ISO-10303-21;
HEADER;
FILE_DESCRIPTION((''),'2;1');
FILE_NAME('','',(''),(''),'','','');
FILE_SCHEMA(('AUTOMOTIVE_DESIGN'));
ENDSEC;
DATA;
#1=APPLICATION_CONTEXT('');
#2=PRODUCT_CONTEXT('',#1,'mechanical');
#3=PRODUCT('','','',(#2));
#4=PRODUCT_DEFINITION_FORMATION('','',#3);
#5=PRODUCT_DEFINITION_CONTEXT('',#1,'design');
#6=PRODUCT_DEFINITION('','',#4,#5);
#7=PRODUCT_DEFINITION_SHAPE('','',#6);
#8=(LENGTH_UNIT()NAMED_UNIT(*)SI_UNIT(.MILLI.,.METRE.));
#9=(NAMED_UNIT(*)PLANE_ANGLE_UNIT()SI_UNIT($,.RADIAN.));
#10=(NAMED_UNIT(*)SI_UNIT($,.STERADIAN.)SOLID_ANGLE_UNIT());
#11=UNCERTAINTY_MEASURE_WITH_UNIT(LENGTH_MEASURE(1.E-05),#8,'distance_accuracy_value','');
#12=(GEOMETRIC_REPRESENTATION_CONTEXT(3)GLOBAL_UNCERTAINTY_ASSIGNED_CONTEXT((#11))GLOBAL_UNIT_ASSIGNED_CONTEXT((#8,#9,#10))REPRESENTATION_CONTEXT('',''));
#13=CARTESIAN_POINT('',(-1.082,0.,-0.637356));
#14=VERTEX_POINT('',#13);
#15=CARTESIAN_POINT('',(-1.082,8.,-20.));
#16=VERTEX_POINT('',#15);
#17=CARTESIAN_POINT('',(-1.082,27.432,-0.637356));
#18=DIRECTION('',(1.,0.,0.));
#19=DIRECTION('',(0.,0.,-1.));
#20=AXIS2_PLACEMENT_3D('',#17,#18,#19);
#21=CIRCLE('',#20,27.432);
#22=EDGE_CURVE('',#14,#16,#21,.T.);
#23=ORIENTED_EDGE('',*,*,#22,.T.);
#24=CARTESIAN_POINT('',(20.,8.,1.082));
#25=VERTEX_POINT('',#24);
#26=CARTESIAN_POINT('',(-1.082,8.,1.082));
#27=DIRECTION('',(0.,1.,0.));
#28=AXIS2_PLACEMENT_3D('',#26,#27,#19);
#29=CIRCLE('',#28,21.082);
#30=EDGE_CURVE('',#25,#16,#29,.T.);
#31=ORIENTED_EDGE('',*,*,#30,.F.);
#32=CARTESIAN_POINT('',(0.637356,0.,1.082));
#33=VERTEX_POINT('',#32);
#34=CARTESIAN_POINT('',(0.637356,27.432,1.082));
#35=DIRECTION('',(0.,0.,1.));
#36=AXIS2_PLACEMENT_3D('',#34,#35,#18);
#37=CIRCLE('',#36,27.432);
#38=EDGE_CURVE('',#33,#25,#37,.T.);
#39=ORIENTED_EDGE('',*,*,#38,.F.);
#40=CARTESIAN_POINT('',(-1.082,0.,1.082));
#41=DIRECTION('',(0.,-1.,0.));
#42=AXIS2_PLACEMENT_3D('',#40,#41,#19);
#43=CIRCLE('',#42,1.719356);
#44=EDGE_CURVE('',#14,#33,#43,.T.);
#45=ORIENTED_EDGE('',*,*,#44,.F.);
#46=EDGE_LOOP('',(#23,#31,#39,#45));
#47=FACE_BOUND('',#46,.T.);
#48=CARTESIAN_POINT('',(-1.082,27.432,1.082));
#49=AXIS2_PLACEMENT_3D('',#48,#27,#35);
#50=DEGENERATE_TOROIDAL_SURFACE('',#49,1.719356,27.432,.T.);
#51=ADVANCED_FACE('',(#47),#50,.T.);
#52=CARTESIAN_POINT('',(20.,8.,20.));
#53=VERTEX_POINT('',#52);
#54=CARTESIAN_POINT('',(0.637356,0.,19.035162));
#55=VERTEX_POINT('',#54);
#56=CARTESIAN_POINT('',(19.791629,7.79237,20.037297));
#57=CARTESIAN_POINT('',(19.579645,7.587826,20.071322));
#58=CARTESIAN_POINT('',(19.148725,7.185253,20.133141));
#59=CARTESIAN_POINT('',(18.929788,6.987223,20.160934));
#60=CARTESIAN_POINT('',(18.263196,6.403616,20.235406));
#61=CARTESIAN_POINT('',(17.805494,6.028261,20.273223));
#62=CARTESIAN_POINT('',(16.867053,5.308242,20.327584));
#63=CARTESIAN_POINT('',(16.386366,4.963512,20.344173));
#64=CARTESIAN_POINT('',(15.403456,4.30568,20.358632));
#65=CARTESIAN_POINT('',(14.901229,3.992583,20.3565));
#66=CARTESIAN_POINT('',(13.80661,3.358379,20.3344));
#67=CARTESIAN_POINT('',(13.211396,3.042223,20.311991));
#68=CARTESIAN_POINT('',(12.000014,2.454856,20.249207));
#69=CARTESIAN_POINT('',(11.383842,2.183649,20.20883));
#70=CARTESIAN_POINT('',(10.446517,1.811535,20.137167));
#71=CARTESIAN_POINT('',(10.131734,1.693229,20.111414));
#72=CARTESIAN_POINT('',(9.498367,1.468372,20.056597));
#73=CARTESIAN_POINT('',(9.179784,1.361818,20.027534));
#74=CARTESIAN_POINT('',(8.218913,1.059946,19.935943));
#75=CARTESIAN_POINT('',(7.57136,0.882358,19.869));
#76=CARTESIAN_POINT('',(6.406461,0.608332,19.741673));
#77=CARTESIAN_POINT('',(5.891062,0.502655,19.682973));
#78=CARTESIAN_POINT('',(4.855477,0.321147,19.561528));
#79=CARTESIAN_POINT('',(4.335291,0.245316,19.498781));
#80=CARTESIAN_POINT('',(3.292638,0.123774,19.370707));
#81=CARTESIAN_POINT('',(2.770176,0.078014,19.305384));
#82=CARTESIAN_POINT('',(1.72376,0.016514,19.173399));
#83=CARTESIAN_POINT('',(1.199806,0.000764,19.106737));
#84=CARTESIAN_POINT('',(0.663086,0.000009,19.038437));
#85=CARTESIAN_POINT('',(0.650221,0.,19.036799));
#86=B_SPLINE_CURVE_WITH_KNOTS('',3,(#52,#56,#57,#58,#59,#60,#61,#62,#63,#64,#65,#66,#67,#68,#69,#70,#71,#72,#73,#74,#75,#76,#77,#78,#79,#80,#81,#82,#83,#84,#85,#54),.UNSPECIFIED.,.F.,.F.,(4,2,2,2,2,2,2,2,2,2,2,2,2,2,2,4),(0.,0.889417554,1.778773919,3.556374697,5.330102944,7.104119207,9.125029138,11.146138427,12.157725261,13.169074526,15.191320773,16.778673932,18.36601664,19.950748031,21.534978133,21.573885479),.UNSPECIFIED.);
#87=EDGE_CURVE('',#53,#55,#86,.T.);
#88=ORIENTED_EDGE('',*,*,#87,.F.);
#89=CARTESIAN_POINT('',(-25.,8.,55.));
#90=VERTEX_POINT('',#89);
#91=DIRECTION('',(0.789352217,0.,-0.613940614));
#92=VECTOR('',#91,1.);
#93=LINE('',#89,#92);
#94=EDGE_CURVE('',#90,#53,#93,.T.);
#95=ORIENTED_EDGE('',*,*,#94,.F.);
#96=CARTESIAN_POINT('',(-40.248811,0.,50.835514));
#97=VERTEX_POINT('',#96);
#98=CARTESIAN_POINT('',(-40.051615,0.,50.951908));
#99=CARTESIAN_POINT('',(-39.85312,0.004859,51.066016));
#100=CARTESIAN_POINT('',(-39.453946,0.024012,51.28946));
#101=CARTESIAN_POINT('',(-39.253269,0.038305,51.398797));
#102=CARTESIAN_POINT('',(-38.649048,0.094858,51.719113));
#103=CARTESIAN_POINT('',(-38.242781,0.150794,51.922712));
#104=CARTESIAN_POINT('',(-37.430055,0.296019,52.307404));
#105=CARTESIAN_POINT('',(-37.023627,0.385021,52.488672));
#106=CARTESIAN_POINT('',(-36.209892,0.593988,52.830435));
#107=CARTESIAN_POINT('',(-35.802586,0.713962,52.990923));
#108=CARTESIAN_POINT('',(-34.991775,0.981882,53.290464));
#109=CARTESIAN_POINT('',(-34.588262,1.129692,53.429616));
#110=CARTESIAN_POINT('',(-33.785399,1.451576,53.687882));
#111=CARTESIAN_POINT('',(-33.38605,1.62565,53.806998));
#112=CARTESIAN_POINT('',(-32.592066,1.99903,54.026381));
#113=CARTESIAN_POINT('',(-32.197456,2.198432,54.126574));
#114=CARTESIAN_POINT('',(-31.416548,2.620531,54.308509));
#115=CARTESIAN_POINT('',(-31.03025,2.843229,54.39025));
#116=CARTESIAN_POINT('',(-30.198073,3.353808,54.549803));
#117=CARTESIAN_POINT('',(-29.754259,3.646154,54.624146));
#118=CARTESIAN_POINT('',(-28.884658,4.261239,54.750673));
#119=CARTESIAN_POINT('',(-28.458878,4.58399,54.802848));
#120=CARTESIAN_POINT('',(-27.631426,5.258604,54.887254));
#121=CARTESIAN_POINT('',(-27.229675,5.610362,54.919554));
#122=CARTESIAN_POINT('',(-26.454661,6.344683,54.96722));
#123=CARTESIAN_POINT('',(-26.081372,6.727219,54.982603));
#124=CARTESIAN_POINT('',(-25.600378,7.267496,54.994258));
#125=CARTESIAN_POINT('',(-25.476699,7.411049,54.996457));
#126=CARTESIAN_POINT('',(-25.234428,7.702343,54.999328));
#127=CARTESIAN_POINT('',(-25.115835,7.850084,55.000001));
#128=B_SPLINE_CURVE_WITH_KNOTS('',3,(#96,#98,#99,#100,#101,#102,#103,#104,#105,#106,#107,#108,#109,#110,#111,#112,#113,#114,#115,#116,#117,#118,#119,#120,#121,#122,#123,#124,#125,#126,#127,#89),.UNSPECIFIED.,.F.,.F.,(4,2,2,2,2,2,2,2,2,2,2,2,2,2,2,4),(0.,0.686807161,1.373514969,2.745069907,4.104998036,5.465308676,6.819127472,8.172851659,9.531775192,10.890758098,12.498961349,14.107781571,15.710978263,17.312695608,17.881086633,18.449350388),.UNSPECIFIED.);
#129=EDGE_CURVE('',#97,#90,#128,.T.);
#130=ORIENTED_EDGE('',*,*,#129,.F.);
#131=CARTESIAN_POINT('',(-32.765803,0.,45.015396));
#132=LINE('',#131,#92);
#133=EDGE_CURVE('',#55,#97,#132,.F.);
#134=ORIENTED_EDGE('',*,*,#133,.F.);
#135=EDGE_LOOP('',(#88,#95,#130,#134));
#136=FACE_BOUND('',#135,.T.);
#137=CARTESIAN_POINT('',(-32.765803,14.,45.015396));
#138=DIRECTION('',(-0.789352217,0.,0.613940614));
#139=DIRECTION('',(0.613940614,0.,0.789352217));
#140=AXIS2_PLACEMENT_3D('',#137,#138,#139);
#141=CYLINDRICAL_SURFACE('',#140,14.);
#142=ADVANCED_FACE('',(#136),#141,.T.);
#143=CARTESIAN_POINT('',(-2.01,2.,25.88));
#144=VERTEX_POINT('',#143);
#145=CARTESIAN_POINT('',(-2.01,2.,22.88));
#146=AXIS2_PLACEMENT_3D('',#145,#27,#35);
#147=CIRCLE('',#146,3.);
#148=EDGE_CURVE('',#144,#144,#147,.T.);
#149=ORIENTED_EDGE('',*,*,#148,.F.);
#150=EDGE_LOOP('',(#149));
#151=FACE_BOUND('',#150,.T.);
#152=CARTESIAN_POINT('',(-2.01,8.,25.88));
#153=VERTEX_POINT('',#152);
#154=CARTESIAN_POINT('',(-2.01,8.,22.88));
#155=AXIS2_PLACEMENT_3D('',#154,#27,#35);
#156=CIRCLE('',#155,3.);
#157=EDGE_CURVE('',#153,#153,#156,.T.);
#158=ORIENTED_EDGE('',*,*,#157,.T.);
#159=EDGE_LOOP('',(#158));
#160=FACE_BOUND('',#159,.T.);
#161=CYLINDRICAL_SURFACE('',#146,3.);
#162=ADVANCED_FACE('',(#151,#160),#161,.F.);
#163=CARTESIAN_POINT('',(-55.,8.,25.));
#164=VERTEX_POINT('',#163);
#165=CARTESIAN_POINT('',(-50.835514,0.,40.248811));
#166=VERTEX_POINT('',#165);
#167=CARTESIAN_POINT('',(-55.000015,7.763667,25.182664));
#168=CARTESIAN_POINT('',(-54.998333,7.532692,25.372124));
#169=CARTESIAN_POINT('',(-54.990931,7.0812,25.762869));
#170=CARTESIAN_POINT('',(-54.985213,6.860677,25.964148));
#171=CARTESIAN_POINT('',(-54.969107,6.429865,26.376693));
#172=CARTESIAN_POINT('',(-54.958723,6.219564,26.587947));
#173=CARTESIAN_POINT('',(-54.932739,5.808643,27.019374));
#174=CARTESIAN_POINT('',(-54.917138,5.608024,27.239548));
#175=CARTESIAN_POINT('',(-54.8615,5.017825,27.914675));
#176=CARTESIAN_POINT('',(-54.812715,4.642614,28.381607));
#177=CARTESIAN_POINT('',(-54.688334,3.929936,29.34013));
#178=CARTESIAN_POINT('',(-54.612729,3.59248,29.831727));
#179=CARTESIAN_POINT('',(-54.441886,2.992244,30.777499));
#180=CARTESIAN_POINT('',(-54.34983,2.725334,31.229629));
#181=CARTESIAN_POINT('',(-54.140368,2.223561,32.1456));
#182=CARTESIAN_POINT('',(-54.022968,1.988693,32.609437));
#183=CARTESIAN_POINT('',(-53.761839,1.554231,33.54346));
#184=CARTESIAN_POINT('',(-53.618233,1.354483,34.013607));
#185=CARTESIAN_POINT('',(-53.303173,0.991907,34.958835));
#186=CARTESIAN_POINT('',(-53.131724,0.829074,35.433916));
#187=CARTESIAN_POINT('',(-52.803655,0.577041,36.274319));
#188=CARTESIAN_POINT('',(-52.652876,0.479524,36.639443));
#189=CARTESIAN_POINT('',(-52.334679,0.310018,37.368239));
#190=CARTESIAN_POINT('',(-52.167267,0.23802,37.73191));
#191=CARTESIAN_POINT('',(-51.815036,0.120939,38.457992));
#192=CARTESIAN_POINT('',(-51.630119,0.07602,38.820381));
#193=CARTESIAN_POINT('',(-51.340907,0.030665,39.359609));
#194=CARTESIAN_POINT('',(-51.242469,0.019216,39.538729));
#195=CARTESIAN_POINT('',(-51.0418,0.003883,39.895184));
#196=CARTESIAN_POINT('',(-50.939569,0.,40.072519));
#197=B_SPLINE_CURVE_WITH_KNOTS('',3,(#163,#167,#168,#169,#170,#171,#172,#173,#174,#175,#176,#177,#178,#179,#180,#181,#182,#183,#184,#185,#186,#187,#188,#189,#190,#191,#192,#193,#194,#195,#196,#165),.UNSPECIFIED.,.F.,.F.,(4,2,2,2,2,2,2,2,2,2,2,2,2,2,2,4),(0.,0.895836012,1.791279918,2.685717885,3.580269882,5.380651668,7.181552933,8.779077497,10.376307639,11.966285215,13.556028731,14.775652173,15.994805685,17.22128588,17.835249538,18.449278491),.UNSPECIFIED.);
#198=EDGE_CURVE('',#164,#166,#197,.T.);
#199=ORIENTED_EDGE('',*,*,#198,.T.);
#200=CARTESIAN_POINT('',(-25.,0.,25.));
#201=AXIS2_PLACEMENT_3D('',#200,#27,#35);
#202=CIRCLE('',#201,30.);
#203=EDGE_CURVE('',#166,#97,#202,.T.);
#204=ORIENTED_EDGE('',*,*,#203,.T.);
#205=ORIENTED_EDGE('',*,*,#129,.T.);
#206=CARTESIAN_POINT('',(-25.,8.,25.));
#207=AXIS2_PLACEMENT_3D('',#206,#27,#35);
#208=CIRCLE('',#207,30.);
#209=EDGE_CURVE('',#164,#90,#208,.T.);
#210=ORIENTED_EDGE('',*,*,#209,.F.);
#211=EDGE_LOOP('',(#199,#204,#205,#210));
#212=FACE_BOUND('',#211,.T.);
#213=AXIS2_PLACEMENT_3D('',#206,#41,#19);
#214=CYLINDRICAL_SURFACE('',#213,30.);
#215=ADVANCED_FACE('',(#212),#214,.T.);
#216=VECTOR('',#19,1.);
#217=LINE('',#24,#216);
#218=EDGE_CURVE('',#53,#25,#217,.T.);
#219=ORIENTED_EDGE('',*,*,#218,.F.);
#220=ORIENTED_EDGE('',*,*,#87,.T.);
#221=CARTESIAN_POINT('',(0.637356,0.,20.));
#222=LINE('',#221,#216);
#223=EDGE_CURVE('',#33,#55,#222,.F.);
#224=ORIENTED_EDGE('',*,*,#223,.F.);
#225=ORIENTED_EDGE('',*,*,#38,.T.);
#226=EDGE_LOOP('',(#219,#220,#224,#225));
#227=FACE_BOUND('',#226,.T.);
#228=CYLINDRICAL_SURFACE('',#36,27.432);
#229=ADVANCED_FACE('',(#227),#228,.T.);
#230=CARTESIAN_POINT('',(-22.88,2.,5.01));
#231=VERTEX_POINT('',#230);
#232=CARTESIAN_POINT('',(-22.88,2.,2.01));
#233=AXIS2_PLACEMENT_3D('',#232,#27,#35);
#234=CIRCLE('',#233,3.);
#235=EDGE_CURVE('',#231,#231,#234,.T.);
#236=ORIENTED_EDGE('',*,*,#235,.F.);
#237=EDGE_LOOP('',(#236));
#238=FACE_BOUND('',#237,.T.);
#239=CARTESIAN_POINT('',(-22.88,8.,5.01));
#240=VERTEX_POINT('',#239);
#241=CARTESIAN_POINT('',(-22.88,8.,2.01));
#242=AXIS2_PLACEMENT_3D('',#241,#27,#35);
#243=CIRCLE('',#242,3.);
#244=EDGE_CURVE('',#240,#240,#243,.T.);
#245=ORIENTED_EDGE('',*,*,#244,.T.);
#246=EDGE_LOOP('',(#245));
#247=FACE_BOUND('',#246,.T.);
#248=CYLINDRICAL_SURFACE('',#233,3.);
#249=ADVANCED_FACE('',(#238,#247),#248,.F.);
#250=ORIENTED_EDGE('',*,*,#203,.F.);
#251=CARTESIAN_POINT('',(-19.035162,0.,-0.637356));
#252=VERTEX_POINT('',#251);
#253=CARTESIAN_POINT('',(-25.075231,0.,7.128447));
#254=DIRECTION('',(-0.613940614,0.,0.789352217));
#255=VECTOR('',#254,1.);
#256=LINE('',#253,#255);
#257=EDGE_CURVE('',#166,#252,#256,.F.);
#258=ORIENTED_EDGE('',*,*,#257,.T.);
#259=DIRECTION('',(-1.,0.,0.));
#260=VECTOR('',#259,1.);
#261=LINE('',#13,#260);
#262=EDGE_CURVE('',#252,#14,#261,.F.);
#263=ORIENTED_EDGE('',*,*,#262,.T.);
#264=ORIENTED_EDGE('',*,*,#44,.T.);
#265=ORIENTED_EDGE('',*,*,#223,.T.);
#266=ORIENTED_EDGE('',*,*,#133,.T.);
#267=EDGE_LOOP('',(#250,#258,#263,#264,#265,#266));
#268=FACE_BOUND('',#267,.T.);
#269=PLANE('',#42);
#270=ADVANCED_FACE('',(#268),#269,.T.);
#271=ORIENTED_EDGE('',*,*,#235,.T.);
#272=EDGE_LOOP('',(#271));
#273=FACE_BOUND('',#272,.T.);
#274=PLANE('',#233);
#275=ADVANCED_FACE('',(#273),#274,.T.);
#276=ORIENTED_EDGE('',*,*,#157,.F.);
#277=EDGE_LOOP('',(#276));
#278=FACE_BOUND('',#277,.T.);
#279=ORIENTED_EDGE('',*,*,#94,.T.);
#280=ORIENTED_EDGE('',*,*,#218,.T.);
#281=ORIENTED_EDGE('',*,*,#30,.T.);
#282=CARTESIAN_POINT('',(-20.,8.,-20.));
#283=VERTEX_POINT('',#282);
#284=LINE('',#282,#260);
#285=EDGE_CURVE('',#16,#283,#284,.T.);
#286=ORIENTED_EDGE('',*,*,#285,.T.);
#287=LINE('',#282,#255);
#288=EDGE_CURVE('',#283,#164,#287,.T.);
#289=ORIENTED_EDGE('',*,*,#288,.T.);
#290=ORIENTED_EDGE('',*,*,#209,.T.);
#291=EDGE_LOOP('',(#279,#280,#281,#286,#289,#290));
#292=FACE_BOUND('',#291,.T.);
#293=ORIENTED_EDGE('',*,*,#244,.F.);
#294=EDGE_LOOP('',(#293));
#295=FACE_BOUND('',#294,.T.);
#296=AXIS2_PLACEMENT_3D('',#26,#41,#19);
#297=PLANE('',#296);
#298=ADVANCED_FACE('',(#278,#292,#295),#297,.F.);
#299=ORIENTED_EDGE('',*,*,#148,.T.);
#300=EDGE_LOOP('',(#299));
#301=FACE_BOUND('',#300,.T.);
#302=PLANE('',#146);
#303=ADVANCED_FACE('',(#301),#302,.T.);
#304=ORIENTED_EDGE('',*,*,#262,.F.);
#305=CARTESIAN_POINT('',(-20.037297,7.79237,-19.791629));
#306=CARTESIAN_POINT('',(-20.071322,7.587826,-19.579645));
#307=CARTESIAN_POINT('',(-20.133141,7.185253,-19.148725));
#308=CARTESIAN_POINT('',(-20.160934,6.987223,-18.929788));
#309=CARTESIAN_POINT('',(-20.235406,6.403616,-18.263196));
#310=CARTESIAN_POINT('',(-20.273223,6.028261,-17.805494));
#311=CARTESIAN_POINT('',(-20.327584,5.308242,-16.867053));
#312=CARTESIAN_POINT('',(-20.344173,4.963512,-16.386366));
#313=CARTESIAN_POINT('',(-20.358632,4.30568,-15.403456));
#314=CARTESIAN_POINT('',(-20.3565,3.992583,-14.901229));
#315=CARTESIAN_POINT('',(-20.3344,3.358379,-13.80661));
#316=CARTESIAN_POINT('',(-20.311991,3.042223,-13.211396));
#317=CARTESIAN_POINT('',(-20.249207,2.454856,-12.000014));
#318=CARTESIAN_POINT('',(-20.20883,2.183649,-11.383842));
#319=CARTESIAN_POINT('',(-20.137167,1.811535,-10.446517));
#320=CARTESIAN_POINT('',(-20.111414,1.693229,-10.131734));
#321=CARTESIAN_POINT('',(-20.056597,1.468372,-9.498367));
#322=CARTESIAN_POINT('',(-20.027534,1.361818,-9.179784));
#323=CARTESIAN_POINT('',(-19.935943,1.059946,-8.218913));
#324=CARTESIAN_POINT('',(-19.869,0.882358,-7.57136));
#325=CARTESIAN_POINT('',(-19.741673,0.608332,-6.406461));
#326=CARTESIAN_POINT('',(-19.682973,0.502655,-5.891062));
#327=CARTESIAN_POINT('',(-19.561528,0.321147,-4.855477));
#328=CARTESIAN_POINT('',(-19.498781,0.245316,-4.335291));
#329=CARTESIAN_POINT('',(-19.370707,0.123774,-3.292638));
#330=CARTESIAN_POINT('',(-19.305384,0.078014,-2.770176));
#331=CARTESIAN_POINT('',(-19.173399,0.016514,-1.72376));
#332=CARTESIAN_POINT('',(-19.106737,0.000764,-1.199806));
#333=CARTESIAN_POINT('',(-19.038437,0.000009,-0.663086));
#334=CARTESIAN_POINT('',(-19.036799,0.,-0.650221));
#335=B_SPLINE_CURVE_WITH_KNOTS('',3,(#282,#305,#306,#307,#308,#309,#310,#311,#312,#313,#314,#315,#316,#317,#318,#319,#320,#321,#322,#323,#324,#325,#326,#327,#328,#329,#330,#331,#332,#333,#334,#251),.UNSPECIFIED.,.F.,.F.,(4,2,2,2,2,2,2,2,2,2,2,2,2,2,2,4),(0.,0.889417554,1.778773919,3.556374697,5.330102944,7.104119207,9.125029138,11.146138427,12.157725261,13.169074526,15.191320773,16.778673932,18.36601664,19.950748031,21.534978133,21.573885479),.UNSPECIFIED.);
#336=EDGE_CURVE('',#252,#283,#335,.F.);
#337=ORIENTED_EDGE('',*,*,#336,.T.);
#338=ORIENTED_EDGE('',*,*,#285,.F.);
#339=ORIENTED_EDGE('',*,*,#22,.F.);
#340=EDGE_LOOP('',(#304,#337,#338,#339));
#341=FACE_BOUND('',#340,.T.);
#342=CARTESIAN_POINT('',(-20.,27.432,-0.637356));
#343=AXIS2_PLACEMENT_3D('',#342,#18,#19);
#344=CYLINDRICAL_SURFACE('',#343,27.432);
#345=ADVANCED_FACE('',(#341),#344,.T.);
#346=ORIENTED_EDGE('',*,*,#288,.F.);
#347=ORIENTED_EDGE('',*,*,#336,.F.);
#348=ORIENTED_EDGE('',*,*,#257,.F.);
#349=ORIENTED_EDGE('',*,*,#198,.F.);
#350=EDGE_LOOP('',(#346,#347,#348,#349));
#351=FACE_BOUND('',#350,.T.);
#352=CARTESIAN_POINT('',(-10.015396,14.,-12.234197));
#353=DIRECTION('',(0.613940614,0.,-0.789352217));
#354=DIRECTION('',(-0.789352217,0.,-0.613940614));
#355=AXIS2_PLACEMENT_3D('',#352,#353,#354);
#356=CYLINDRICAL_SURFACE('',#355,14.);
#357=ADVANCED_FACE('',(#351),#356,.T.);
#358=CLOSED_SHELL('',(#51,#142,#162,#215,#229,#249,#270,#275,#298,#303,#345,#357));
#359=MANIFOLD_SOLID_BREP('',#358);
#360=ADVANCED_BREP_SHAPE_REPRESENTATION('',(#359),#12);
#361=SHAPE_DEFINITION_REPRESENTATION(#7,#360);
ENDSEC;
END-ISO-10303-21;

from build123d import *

# Parameters (mm, degrees)
BOSS_EXTRUDE1_DEPTH = 8
FILLET1_R           = 27.432
FILLET3_START       = -62.980474595
FILLET3_DEPTH       = 78.103235199
FILLET3_2_DEPTH     = 78.103235199
SKETCH2_R           = 3
CUT_EXTRUDE1_DEPTH  = 6


with BuildPart() as part:
    # Sketch1 → Boss-Extrude1 (new body)
    with BuildSketch(Plane(origin=(0, 0, 0), x_dir=(1, 0, 0), z_dir=(0, 1, 0))):
        with BuildLine():
            Line((-20, 20), (-55, -25))
            ThreePointArc((-55, -25), (-46.213203436, -46.213203436), (-25, -55))
            Line((-25, -55), (20, -20))
            Line((20, -20), (20, -1.082))
            ThreePointArc((20, -1.082), (13.825225161, 13.825225161), (-1.082, 20))
            Line((-1.082, 20), (-20, 20))
        make_face()
    extrude(amount=BOSS_EXTRUDE1_DEPTH)

    # Fillet1
    # the kernel refuses this fillet: 27.432 mm, written as the material it takes off along each edge
    with BuildSketch(Plane(origin=(-1.082, 0, -20), x_dir=(0, 1, 0), z_dir=(-1, 0, 0)), Plane(origin=(20, 0, 68.406611119), x_dir=(0, 1, 0), z_dir=(0, 0, -1))) as fillet1_piece_1:
        with BuildLine():
            CenterArc((27.432, -19.362644447), FILLET1_R, 135.102431051, 44.897568949)
            Line((0, -19.362644447), (-0.54864, -19.362644447))
            Line((-0.54864, -19.362644447), (-0.54864, 0))
            Line((-0.54864, 0), (0, 0.54864))
            ThreePointArc((0, 0.54864), (4, 0.54864), (7.61136, 0.387252889))
            Line((7.61136, 0.387252889), (8, 0))
        make_face()
    extrude(amount=67.324611119, mode=Mode.SUBTRACT)
    with BuildSketch(Plane(origin=(-1.082, 0, 1.082), x_dir=(1, 0, 0), z_dir=(0, 0, 1))) as fillet1_piece_2:
        with BuildLine():
            CenterArc((1.719355553, 27.432), FILLET1_R, 270, 44.897568949)
            Line((1.719355553, 0), (1.719355553, -0.54864))
            Line((1.719355553, -0.54864), (21.082, -0.54864))
            Line((21.082, -0.54864), (21.63064, 0))
            ThreePointArc((21.63064, 0), (21.63064, 4), (21.469252889, 7.61136))
            Line((21.469252889, 7.61136), (21.082, 8))
        make_face()
    revolve(axis=Axis((-1.082, 0, 1.082), (0, 1, 0)), revolution_arc=90, mode=Mode.SUBTRACT)

    # Fillet3: read off the stored shape, not the designer's step
    # Fillet3 outline → Fillet3 (cut)
    with BuildSketch(Plane(origin=(0, 0, 0), x_dir=(0.7893522173763267, 0, 0.6139406135149199), z_dir=(0.6139406135149199, 0, -0.7893522173763268)).offset(FILLET3_START)):
        with BuildLine():
            ThreePointArc((-28.065856618, -8), (-22.900060751, -2.167840434), (-15.416745977, 0))
            Line((-15.416745977, 0), (-28.065856618, 0))
            Line((-28.065856618, 0), (-28.065856618, -8))
        make_face()
    extrude(amount=FILLET3_DEPTH, mode=Mode.SUBTRACT)

    # Fillet3 2 outline → Fillet3 2 (cut)
    with BuildSketch(Plane(origin=(0, 0, 0), x_dir=(0.6139406135149201, 0, 0.7893522173763264), z_dir=(0.7893522173763264, 0, -0.6139406135149204)).offset(FILLET3_START)):
        with BuildLine():
            Line((28.065856618, 0), (15.416745977, 0))
            ThreePointArc((15.416745977, 0), (22.900060751, -2.167840434), (28.065856618, -8))
            Line((28.065856618, -8), (28.065856618, 0))
        make_face()
    extrude(amount=FILLET3_2_DEPTH, mode=Mode.SUBTRACT)

    # Sketch2 → Cut-Extrude1 (cut)
    with BuildSketch(Plane(origin=(0, 8, 0), x_dir=(1, 0, 0), z_dir=(0, 1, 0))):
        with Locations(Location((-22.88, -2.01, 0), (0, 0, 270))):
            Circle(SKETCH2_R)
        with Locations(Location((-2.01, -22.88, 0), (0, 0, 270))):
            Circle(SKETCH2_R)
    extrude(amount=-CUT_EXTRUDE1_DEPTH, mode=Mode.SUBTRACT)


solid = part.part
